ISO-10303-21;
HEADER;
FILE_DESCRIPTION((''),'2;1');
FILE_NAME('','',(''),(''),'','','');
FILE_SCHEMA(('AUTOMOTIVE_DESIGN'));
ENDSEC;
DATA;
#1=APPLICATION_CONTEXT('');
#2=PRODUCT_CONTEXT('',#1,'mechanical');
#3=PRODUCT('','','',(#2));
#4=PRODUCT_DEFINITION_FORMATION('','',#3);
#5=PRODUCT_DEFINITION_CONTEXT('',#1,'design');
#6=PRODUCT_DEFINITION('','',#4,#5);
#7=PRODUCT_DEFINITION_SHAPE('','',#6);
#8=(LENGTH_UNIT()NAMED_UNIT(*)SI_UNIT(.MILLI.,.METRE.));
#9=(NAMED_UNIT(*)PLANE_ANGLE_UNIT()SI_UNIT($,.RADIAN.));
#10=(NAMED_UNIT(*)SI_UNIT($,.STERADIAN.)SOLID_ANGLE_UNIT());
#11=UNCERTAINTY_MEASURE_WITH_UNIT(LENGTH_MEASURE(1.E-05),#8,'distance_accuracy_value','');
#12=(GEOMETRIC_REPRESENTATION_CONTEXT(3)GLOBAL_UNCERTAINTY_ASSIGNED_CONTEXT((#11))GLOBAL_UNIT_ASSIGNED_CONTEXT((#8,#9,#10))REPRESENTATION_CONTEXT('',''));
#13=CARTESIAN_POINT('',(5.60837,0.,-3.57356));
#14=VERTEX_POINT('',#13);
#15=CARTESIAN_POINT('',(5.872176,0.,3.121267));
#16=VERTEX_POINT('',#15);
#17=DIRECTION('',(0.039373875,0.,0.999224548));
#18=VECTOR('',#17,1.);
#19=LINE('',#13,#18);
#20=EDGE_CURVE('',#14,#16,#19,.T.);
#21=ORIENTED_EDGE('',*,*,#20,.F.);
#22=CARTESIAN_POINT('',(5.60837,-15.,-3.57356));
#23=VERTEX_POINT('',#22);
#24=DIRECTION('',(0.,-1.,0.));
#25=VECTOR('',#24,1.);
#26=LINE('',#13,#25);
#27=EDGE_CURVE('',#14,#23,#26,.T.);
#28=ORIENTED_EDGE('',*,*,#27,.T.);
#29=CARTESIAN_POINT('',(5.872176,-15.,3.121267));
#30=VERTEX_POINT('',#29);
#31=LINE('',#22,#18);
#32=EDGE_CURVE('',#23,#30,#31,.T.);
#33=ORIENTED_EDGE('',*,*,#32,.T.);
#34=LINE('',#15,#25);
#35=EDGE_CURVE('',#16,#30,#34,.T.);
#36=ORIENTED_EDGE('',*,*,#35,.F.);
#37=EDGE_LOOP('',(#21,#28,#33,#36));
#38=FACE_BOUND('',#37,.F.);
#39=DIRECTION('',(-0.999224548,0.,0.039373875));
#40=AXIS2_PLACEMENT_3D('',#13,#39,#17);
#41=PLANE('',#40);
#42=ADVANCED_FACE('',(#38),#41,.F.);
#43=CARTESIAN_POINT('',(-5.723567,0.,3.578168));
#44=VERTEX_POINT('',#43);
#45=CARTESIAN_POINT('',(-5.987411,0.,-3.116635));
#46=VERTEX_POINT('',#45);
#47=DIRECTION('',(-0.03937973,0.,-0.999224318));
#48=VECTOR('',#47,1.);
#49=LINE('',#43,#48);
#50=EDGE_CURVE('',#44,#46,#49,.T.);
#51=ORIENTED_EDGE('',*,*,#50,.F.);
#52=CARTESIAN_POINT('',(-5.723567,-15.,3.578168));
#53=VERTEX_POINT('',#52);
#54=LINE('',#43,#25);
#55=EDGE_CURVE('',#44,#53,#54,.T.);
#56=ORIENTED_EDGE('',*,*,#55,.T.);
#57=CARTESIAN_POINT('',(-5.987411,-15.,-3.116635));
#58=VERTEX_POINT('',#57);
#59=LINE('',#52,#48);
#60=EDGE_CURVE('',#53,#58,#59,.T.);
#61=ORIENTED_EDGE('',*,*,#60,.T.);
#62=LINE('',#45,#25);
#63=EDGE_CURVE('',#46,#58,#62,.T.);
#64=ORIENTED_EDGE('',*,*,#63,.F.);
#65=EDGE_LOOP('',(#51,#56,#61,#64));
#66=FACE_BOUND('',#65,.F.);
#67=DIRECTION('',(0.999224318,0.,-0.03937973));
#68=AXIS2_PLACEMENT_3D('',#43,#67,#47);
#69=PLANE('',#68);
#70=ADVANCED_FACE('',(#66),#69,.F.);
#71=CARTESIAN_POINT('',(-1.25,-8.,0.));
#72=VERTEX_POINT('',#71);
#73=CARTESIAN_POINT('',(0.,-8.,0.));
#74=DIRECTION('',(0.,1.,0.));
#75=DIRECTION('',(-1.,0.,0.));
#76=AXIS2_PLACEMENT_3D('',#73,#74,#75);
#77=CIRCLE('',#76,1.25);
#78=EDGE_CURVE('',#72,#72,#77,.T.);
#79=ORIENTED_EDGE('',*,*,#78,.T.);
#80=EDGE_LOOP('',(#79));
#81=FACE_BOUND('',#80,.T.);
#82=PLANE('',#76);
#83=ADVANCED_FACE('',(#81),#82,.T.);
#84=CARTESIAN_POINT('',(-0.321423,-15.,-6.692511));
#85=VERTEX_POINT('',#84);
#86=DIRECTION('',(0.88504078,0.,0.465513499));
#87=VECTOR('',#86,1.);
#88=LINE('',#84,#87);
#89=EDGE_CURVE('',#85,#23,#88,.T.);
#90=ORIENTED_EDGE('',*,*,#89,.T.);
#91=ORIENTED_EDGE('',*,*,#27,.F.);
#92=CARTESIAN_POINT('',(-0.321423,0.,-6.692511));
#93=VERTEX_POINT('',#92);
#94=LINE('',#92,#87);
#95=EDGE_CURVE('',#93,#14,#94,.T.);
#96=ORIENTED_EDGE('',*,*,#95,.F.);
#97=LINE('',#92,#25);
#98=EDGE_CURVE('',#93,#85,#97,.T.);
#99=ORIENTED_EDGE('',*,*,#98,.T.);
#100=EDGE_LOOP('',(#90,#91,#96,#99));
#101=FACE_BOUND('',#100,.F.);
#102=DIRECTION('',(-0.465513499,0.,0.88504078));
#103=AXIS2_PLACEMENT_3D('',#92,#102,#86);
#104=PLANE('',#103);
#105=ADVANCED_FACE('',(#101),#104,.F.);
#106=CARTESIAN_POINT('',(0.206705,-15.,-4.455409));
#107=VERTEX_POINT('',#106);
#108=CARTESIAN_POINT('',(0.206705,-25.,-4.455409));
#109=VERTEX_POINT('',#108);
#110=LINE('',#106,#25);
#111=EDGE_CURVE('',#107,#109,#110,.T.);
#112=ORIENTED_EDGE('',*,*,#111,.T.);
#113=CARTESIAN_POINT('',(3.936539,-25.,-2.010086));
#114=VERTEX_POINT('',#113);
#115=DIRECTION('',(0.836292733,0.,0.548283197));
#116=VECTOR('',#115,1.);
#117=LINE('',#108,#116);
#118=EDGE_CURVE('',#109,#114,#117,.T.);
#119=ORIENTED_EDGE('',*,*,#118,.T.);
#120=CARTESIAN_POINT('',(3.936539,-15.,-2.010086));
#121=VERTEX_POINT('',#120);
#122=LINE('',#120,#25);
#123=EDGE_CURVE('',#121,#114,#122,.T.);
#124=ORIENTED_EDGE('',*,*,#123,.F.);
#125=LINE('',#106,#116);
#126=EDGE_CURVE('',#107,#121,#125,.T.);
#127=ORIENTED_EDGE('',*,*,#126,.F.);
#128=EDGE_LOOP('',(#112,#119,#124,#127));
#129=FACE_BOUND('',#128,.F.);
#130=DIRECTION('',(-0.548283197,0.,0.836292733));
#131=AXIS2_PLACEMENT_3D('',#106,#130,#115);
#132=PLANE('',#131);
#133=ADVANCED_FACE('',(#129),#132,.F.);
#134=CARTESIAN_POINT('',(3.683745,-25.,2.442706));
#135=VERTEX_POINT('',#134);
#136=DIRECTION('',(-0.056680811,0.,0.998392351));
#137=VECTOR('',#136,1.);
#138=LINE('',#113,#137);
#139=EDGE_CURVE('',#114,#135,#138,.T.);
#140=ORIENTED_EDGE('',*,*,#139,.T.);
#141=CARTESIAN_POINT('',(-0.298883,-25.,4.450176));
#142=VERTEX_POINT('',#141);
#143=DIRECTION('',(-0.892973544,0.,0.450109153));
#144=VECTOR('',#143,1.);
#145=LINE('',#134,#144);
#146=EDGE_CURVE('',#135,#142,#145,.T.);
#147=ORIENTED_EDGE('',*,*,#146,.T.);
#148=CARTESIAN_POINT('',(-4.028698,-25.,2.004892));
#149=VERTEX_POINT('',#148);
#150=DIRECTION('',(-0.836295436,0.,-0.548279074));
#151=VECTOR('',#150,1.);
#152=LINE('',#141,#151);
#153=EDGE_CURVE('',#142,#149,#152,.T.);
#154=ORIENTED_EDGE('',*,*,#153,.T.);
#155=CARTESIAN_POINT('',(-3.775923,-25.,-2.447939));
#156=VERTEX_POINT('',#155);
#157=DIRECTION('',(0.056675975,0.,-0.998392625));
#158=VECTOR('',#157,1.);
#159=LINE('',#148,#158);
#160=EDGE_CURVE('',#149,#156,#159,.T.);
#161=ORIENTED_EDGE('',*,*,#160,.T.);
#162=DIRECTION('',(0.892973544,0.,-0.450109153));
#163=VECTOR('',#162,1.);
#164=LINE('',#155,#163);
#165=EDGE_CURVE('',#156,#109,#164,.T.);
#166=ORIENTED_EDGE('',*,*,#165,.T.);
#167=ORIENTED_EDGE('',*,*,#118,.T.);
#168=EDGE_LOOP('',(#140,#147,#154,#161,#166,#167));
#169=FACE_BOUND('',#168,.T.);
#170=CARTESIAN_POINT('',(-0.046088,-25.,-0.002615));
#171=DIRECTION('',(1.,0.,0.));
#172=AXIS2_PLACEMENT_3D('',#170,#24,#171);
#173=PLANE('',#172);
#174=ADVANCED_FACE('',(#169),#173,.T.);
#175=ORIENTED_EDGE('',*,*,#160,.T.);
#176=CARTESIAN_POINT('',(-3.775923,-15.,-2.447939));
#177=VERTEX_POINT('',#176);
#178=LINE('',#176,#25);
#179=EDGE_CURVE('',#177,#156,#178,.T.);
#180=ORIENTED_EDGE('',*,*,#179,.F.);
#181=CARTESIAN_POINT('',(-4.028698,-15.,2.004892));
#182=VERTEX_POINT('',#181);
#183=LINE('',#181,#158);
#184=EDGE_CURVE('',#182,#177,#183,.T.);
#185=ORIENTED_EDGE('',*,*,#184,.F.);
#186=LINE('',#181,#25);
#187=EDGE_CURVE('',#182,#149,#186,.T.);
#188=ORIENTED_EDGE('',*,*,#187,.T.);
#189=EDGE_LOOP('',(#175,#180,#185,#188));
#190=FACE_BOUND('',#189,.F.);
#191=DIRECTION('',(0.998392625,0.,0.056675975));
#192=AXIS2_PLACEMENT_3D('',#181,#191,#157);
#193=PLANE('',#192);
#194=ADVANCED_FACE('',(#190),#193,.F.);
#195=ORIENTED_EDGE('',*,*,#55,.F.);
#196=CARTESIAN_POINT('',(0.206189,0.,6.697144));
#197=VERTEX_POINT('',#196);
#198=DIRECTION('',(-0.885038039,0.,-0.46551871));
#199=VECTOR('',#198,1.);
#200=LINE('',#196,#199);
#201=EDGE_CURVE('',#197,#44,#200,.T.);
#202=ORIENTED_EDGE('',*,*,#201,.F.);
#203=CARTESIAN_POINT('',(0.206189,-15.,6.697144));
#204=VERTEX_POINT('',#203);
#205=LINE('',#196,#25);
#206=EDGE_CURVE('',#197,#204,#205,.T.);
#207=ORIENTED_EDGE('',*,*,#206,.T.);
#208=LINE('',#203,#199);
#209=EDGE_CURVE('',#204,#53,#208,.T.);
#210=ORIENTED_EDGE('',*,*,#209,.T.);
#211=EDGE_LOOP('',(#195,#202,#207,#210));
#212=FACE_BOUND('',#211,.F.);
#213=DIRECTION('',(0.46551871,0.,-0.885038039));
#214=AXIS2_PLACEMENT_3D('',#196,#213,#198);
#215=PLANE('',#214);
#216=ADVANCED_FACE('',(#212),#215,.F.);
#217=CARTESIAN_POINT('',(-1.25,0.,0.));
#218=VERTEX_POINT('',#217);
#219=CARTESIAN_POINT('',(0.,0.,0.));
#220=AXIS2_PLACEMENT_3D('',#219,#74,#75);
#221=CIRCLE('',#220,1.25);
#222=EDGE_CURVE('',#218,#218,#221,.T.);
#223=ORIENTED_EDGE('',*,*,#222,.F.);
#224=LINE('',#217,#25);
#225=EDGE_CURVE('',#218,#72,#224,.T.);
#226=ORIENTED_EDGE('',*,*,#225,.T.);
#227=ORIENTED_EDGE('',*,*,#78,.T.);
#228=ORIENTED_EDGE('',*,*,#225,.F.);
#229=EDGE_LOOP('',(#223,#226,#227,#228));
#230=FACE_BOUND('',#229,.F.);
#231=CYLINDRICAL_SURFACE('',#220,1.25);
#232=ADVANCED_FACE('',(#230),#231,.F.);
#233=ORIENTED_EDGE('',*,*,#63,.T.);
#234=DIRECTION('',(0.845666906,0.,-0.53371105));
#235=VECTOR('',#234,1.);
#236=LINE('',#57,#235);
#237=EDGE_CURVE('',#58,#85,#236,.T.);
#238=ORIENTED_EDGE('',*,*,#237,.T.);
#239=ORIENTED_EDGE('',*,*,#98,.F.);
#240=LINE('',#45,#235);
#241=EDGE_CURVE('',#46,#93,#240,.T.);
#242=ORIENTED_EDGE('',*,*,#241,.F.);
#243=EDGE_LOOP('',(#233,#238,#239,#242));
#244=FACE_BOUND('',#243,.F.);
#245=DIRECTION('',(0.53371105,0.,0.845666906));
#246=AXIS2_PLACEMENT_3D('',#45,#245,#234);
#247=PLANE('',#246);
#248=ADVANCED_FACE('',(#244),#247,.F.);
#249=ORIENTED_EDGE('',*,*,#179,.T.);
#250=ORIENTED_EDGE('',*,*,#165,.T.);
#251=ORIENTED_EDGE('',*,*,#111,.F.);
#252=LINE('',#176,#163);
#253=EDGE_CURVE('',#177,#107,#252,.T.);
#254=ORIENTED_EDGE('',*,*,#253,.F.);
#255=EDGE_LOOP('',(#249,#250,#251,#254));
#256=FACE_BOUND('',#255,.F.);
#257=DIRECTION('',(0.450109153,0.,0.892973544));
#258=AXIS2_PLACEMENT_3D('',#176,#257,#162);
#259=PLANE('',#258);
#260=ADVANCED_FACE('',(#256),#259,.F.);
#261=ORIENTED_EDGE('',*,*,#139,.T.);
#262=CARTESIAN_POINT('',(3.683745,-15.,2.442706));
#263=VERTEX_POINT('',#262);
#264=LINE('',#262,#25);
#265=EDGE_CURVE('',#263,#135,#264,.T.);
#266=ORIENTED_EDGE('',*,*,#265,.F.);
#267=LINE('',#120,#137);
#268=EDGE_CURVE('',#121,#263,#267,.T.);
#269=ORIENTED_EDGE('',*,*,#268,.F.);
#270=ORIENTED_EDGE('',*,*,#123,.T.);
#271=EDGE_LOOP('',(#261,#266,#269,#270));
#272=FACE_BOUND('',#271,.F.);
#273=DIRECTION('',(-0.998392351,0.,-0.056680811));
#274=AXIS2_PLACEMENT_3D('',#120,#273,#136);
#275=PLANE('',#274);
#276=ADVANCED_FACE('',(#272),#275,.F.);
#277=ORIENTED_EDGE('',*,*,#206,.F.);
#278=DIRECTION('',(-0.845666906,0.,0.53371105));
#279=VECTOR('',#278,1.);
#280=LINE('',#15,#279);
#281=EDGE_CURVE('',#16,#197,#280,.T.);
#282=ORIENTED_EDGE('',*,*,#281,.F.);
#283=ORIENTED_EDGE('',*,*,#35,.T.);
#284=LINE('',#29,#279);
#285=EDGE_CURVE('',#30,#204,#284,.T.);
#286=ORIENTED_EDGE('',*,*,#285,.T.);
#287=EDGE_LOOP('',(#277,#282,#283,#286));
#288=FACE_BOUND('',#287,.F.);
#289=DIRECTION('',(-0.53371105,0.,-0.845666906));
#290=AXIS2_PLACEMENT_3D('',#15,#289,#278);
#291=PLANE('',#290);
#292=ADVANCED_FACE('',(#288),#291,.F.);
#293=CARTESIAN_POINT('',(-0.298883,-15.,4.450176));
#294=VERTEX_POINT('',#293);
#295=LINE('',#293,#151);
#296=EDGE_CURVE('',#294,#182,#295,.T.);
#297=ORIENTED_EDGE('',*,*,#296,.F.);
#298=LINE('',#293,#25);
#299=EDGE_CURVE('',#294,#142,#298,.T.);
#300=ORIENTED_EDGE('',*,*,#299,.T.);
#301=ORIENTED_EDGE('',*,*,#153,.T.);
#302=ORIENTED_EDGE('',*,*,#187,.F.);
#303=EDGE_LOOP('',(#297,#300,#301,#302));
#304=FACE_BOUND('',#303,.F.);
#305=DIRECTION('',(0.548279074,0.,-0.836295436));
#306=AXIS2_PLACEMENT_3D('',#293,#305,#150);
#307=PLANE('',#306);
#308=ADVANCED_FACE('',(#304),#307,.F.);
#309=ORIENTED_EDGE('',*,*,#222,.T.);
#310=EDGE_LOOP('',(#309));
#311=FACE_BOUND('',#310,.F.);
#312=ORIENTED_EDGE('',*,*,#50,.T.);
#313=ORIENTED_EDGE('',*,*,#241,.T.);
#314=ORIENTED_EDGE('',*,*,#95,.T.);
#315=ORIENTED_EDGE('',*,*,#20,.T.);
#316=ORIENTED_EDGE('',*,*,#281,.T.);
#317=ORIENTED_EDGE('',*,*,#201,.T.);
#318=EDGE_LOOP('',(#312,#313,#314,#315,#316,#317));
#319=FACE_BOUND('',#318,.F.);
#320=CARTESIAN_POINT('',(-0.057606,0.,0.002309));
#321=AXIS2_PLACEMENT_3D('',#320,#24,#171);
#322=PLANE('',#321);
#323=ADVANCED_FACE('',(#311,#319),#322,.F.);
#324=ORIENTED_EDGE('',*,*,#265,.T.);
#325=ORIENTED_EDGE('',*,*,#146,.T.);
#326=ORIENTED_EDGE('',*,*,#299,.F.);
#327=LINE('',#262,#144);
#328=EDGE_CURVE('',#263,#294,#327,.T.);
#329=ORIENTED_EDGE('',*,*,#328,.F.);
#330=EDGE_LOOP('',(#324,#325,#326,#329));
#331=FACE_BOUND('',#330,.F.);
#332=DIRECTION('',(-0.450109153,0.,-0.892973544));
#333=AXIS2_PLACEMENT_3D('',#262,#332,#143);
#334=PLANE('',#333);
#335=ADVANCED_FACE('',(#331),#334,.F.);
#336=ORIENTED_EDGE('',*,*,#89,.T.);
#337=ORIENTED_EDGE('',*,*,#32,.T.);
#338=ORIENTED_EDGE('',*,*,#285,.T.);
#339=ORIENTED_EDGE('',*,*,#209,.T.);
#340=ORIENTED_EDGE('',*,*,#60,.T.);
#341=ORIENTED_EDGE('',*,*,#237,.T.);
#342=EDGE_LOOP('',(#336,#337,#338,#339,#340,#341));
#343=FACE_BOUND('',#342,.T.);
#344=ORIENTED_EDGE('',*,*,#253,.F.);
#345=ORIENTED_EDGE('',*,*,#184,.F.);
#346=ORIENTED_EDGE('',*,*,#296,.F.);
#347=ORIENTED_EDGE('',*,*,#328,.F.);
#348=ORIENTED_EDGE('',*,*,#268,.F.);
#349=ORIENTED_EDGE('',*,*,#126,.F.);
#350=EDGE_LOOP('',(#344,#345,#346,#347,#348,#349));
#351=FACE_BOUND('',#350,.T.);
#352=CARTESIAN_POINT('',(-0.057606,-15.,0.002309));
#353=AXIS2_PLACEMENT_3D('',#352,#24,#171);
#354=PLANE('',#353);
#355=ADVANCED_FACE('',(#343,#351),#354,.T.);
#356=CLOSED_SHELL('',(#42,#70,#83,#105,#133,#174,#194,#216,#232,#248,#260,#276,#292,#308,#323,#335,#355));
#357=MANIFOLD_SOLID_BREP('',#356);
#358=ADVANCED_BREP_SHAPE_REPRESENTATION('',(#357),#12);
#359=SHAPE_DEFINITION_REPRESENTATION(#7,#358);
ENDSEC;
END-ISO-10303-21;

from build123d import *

# Parameters (mm, degrees)
F1_DEPTH = 15
F3_DEPTH = 10
F4_R     = 1.25
F5_DEPTH = 8


# Not quite as in the source:
# - ends of sketch curves that miss each other by under 0.0002 mm in the source are joined


with BuildPart() as f1:
    # F0 (on Front) → F1 (new body)
    with BuildSketch(Plane.XZ):
        Polygon((-5.7235665096, 3.5781680242), (-5.9874106989, -3.1166349037), (-0.3214230722, -6.6925111543), (5.608370415, -3.5735600573), (5.8721762755, 3.1212672902), (0.2061886488, 6.6971435408), align=None)
    extrude(amount=F1_DEPTH)

    # F2 (on face) → F3 (join)
    with BuildSketch(Plane.XZ.offset(15)):
        Polygon((-4.0286979474, 2.0048922286), (-3.7759230982, -2.4479388793), (0.2067050986, -4.4554086614), (3.9365390256, -2.0100863602), (3.6837447559, 2.442705723), (-0.2988834409, 4.4501755052), align=None)
    extrude(amount=F3_DEPTH)

    # F4 (on face) → F5 (cut)
    with BuildSketch(Plane(origin=(0, 0, 0), x_dir=(-1, 0, 0), z_dir=(0, 1, 0))):
        Circle(F4_R)
    extrude(amount=-F5_DEPTH, mode=Mode.SUBTRACT)


solid = f1.part
